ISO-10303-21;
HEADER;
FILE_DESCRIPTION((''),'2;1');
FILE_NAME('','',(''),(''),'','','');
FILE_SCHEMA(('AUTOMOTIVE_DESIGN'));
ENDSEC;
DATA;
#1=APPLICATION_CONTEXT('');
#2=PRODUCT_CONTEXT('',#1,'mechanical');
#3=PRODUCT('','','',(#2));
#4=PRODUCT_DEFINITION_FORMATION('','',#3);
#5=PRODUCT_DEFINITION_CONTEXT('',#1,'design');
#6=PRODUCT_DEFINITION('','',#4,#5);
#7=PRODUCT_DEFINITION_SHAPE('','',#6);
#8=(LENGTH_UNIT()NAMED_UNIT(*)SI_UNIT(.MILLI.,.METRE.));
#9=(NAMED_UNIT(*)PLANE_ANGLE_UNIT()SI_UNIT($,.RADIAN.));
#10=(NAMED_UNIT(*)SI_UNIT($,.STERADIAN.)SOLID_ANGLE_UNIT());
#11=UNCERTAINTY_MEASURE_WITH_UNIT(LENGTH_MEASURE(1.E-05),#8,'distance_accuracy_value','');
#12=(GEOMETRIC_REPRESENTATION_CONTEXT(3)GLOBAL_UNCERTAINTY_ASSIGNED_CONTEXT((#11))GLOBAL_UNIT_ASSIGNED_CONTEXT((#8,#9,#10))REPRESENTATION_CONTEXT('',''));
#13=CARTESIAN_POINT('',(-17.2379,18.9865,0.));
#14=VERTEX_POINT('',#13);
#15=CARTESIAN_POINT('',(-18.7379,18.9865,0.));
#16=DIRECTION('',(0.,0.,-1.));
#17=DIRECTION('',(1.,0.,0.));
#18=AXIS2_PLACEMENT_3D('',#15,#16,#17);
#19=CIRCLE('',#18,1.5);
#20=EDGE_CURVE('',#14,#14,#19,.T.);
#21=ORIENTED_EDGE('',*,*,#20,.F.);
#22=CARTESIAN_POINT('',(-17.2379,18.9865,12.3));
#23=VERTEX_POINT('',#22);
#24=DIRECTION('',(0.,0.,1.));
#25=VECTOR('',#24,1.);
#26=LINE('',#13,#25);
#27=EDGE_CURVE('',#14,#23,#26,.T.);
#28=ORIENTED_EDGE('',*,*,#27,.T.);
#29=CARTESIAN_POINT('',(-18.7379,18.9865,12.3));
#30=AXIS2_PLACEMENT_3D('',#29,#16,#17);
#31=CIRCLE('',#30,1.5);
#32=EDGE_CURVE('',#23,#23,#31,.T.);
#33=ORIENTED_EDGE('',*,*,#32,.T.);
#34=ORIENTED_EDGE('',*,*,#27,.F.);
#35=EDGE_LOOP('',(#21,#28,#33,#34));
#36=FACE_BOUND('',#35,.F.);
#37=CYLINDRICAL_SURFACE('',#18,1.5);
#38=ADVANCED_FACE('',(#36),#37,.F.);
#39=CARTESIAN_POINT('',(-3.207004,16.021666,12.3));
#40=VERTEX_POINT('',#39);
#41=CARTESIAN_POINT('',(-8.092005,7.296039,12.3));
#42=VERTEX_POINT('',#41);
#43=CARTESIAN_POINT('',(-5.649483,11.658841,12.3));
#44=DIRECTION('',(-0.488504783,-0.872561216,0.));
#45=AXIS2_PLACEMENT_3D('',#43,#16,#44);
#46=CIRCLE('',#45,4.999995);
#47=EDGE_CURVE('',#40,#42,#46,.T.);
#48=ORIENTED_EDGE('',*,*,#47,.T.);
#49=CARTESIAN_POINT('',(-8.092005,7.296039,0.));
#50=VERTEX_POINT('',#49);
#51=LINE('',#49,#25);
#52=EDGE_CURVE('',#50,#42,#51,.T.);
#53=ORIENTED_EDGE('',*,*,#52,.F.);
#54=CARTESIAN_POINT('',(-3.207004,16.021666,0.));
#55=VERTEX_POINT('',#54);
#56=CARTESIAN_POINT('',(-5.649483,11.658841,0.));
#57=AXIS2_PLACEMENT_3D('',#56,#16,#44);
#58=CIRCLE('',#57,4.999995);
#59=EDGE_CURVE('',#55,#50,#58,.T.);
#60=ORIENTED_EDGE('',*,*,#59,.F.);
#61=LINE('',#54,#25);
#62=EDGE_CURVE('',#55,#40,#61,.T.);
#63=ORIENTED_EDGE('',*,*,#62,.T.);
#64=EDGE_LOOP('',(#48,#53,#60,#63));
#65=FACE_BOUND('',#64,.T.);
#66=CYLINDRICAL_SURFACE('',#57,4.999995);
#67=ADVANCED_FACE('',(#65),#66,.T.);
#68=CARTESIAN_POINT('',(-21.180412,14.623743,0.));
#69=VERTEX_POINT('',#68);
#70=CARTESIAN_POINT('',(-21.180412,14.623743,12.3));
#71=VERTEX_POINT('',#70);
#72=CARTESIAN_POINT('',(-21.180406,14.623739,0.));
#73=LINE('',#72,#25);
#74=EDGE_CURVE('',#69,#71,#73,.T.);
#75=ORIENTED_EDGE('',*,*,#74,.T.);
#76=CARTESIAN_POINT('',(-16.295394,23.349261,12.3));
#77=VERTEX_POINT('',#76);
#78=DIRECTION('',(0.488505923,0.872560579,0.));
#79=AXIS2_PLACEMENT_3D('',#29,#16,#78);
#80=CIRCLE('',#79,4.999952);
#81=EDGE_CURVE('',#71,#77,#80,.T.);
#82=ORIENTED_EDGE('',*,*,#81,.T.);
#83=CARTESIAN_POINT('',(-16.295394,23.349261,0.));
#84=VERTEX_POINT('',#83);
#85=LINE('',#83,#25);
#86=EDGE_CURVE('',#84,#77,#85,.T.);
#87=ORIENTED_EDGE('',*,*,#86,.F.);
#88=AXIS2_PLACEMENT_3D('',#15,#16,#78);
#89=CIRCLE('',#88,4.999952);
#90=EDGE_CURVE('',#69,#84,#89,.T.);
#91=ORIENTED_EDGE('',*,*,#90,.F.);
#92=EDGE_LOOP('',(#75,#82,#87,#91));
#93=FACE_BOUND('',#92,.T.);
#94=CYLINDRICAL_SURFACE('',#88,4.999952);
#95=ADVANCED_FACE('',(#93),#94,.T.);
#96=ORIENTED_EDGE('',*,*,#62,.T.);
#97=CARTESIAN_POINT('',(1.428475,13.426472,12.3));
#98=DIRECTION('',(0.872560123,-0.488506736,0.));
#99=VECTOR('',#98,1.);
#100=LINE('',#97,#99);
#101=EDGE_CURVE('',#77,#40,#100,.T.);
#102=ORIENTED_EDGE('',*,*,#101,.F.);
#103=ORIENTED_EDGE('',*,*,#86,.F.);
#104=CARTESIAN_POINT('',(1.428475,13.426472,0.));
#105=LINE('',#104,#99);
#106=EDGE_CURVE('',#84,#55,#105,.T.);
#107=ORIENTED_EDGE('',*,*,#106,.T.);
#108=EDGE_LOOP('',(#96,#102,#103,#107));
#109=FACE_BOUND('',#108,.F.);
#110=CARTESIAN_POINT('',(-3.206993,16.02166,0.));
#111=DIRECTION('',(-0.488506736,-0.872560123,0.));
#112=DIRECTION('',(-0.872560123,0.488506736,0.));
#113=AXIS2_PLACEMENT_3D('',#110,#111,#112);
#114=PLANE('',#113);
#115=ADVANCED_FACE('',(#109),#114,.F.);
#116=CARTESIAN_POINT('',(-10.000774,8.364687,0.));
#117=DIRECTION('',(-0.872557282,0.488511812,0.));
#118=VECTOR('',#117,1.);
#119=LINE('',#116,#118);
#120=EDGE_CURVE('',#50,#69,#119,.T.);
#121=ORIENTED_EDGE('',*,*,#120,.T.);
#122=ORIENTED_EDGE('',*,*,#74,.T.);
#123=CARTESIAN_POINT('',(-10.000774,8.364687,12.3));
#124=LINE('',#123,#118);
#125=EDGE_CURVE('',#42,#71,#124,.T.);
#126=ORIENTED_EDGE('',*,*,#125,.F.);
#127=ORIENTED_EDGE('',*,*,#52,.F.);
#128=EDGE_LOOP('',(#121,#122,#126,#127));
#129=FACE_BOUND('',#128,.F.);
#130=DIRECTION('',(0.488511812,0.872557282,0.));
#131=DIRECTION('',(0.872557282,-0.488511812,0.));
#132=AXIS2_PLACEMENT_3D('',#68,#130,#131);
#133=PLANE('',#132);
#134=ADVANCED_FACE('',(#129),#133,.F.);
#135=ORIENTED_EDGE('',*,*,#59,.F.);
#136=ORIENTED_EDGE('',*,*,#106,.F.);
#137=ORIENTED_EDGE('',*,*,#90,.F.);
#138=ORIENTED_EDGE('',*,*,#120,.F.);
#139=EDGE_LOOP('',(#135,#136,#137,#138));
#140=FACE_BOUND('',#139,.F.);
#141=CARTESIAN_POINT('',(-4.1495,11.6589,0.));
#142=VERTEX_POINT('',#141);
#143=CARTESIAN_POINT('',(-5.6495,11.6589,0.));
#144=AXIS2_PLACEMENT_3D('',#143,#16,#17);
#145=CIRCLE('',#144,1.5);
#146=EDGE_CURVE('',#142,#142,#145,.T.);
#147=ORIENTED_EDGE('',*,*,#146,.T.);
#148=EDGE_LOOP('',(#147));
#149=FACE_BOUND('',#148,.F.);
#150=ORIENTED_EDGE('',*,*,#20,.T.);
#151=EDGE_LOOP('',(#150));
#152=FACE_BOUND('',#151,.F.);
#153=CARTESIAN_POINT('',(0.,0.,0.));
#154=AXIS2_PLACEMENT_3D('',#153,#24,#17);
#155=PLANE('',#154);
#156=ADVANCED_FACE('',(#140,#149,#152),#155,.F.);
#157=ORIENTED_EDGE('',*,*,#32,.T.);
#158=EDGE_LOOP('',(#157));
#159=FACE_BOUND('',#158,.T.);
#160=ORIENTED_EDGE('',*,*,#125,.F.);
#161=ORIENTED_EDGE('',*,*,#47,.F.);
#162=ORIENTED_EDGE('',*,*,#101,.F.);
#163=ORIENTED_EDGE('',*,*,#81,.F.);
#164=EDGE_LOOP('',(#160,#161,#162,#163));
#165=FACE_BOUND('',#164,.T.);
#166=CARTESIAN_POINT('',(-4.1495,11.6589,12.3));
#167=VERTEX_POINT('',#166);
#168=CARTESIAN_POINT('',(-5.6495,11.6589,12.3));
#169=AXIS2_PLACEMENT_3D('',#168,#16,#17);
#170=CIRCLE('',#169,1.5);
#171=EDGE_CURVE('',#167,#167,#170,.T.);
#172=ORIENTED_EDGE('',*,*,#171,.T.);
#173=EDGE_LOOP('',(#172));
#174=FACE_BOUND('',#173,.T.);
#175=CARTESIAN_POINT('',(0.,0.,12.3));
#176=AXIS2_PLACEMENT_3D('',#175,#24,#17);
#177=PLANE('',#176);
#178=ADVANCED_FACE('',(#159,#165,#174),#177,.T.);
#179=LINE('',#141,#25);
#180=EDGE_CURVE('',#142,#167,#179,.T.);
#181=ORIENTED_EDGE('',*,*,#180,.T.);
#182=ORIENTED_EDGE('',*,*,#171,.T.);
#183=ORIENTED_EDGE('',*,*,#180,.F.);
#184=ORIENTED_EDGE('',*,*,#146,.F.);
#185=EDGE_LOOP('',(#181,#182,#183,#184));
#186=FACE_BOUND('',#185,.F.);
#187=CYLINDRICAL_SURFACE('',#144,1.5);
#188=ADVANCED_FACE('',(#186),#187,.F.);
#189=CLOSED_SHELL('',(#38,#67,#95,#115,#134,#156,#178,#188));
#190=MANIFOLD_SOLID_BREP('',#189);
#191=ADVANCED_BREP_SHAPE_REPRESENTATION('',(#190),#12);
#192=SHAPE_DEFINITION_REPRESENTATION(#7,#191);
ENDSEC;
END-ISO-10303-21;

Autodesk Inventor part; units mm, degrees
ref_plane "YZ Plane" through (0, 0, 0) normal (1, 0, 0) x (0, 1, 0)
ref_plane "XZ Plane" through (0, 0, 0) normal (0, 1, 0) x (-1, 0, 0)
sketch "Sketch1" plane through (0, 0, 0) normal (0, 0, 1) x (1, 0, 0)
  line L0 (86.516, -0.3214) -> (114.7595, -23.8164) projected
  arc A0 (113.4805, -27.354) -> (114.7595, -23.8164) centre (113.4805, -25.354) ccw projected
  line L1 (113.4805, -27.354) -> (84.3159, -27.354) projected
  arc A1 (80.4978, -22.1613) -> (84.3159, -27.354) centre (84.3159, -23.354) ccw projected
  arc A2 (80.4978, -22.1613) -> (83.238, -1.9261) centre (22.2724, -3.9734) ccw projected
  arc A3 (86.516, -0.3214) -> (83.238, -1.9261) centre (85.2369, -1.8589) ccw projected
  arc A4 (123.464, -37.945) -> (119.4703, -38.0751) centre (121.4642, -37.9192) ccw projected
  arc A5 (144.0129, -57.1973) -> (123.464, -37.945) centre (122.1805, -59.9075) ccw projected
  arc A6 (144.143, -61.191) -> (144.0129, -57.1973) centre (144.1688, -59.1912) ccw projected
  arc A7 (124.8907, -81.7399) -> (144.143, -61.191) centre (122.1805, -59.9075) ccw projected
  arc A8 (120.8969, -81.87) -> (124.8907, -81.7399) centre (122.8968, -81.8958) ccw projected
  arc A9 (100.3481, -62.6177) -> (120.8969, -81.87) centre (122.1805, -59.9075) ccw projected
  arc A10 (100.218, -58.6239) -> (100.3481, -62.6177) centre (100.1921, -60.6238) ccw projected
  arc A11 (119.4703, -38.0751) -> (100.218, -58.6239) centre (122.1805, -59.9075) ccw projected
  arc A12 (87.2274, -61.7195) -> (88.373, -68.9659) centre (122.1805, -59.9075) ccw projected
  arc A13 (85.8324, -71.3887) -> (88.373, -68.9659) centre (86.4412, -69.4836) ccw projected
  line L2 (85.8324, -71.3887) -> (52.5887, -60.766) projected
  arc A14 (52.2157, -57.1184) -> (52.5887, -60.766) centre (53.1975, -58.8609) ccw projected
  arc A15 (52.2157, -57.1184) -> (67.1926, -45.2429) centre (22.2724, -3.9734) ccw projected
  arc A16 (72.896, -45.0519) -> (67.1926, -45.2429) centre (70.1382, -47.9491) ccw projected
  line L3 (72.896, -45.0519) -> (84.7539, -56.3391) projected
  arc A17 (87.2274, -61.7195) -> (84.7539, -56.3391) centre (79.2381, -62.1337) ccw projected
  circle A18 centre (-5.6495, 11.6589) radius 2.05 projected
  circle A19 centre (-18.7379, 18.9865) radius 2.05 projected
  line L4 (2.166, 24.8708) -> (-5.7638, 34.6785) projected
  arc A20 (-5.0374, 39.0984) -> (-5.7638, 34.6785) centre (-3.431, 36.5647) ccw projected
  arc A21 (4.796, 43.9388) -> (-5.0374, 39.0984) centre (22.2724, -3.9734) ccw projected
  arc A22 (8.7012, 41.9703) -> (4.796, 43.9388) centre (5.8241, 41.1205) ccw projected
  line L5 (8.7012, 41.9703) -> (12.2517, 29.9506) projected
  arc A23 (10.4645, 26.3057) -> (12.2517, 29.9506) centre (9.3746, 29.1007) ccw projected
  arc A24 (10.4645, 26.3057) -> (6.0009, 24.16) centre (22.2724, -3.9734) ccw projected
  arc A25 (2.166, 24.8708) -> (6.0009, 24.16) centre (4.4989, 26.757) ccw projected
  line L6 (21.3733, 31.3882) -> (21.0547, 43.9173) projected
  arc A26 (24.1651, 46.9915) -> (21.0547, 43.9173) centre (24.0537, 43.9936) ccw projected
  arc A27 (35.0106, 45.4102) -> (24.1651, 46.9915) centre (22.2724, -3.9734) ccw projected
  arc A28 (37.0613, 41.4281) -> (35.0106, 45.4102) centre (34.2613, 42.5053) ccw projected
  line L7 (37.0613, 41.4281) -> (32.5324, 29.6567) projected
  arc A29 (29.1021, 27.8009) -> (32.5324, 29.6567) centre (29.7325, 30.7339) ccw projected
  arc A30 (29.1021, 27.8009) -> (24.1948, 28.4697) centre (22.2724, -3.9734) ccw projected
  arc A31 (21.3733, 31.3882) -> (24.1948, 28.4697) centre (24.3723, 31.4645) ccw projected
  line L8 (37.199, 27.8613) -> (41.7278, 39.6327) projected
  arc A32 (45.9187, 41.2135) -> (41.7278, 39.6327) centre (44.5277, 38.5555) ccw projected
  arc A33 (55.0274, 35.1177) -> (45.9187, 41.2135) centre (22.2724, -3.9734) ccw projected
  arc A34 (55.2752, 30.7515) -> (55.0274, 35.1177) centre (53.1006, 32.8182) ccw projected
  line L9 (55.2752, 30.7515) -> (46.641, 21.6668) projected
  arc A35 (42.5909, 21.3921) -> (46.641, 21.6668) centre (44.4665, 23.7336) ccw projected
  arc A36 (42.5909, 21.3921) -> (38.5009, 24.1849) centre (22.2724, -3.9734) ccw projected
  arc A37 (37.199, 27.8613) -> (38.5009, 24.1849) centre (39.9989, 26.7841) ccw projected
  line L10 (52.4469, 14.4861) -> (59.2911, 18.6731) projected
  arc A38 (63.5177, 17.4994) -> (59.2911, 18.6731) centre (60.8567, 16.114) ccw projected
  arc A39 (66.9215, 9.0155) -> (63.5177, 17.4994) centre (22.2724, -3.9734) ccw projected
  arc A40 (64.5079, 5.2141) -> (66.9215, 9.0155) centre (64.0409, 8.1775) ccw projected
  line L11 (64.5079, 5.2141) -> (56.5269, 3.9563) projected
  arc A41 (53.2046, 5.9991) -> (56.5269, 3.9563) centre (56.0599, 6.9197) ccw projected
  arc A42 (53.2046, 5.9991) -> (51.3302, 10.5833) centre (22.2724, -3.9734) ccw projected
  arc A43 (52.4469, 14.4861) -> (51.3302, 10.5833) centre (54.0124, 11.927) ccw projected
  line L12 (57.3053, -0.9828) -> (65.2864, 0.2751) projected
  arc A44 (68.7521, -2.5997) -> (65.2864, 0.2751) centre (65.7534, -2.6883) ccw projected
  arc A45 (68.1227, -11.7192) -> (68.7521, -2.5997) centre (22.2724, -3.9734) ccw projected
  arc A46 (64.4621, -14.1361) -> (68.1227, -11.7192) centre (65.1646, -11.2195) ccw projected
  line L13 (64.4621, -14.1361) -> (56.6618, -12.2571) projected
  arc A47 (54.3988, -8.887) -> (56.6618, -12.2571) centre (57.3643, -9.3405) ccw projected
  arc A48 (54.3988, -8.887) -> (54.7724, -3.9485) centre (22.2724, -3.9734) ccw projected
  arc A49 (57.3053, -0.9828) -> (54.7724, -3.9485) centre (57.7724, -3.9462) ccw projected
  line L14 (53.346, -20.8755) -> (64.3558, -26.8641) projected
  arc A50 (65.463, -31.0949) -> (64.3558, -26.8641) centre (62.9223, -29.4995) ccw projected
  arc A51 (58.6707, -39.6968) -> (65.463, -31.0949) centre (22.2724, -3.9734) ccw projected
  arc A52 (54.1968, -39.4816) -> (58.6707, -39.6968) centre (56.5296, -37.5954) ccw projected
  line L15 (54.1968, -39.4816) -> (46.2669, -29.6738) projected
  arc A53 (46.3749, -25.7752) -> (46.2669, -29.6738) centre (48.5998, -27.7876) ccw projected
  arc A54 (46.3749, -25.7752) -> (49.4077, -21.8598) centre (22.2724, -3.9734) ccw projected
  arc A55 (53.346, -20.8755) -> (49.4077, -21.8598) centre (51.9125, -23.5108) ccw projected
  line L16 (42.3788, -32.8175) -> (50.3087, -42.6252) projected
  arc A56 (49.5823, -47.0451) -> (50.3087, -42.6252) centre (47.9758, -44.5114) ccw projected
  arc A57 (39.7488, -51.8855) -> (49.5823, -47.0451) centre (22.2724, -3.9734) ccw projected
  arc A58 (35.8437, -49.917) -> (39.7488, -51.8855) centre (38.7208, -49.0672) ccw projected
  line L17 (35.8437, -49.917) -> (32.2932, -37.8973) projected
  arc A59 (34.0803, -34.2525) -> (32.2932, -37.8973) centre (35.1703, -37.0474) ccw projected
  arc A60 (34.0803, -34.2525) -> (38.5439, -32.1067) centre (22.2724, -3.9734) ccw projected
  arc A61 (42.3788, -32.8175) -> (38.5439, -32.1067) centre (40.0459, -34.7037) ccw projected
  line L18 (23.1715, -39.3349) -> (23.3755, -47.3558) projected
  arc A62 (20.2457, -50.4292) -> (23.3755, -47.3558) centre (20.3765, -47.432) ccw projected
  arc A63 (11.1966, -49.135) -> (20.2457, -50.4292) centre (22.2724, -3.9734) ccw projected
  arc A64 (9.1112, -45.1441) -> (11.1966, -49.135) centre (11.9112, -46.2214) ccw projected
  line L19 (9.1112, -45.1441) -> (12.0124, -37.6034) projected
  arc A65 (15.4428, -35.7477) -> (12.0124, -37.6034) centre (14.8123, -38.6807) ccw projected
  arc A66 (15.4428, -35.7477) -> (20.35, -36.4165) centre (22.2724, -3.9734) ccw projected
  arc A67 (23.1715, -39.3349) -> (20.35, -36.4165) centre (20.1725, -39.4112) ccw projected
  line L20 (7.3459, -35.8081) -> (4.4447, -43.3488) projected
  arc A68 (0.2222, -44.9128) -> (4.4447, -43.3488) centre (1.6448, -42.2715) ccw projected
  arc A69 (-7.3609, -39.808) -> (0.2222, -44.9128) centre (22.2724, -3.9734) ccw projected
  arc A70 (-7.6236, -35.4294) -> (-7.3609, -39.808) centre (-5.449, -37.4961) ccw projected
  line L21 (-7.6236, -35.4294) -> (-2.0962, -29.6136) projected
  arc A71 (1.9539, -29.3388) -> (-2.0962, -29.6136) centre (0.0783, -31.6803) ccw projected
  arc A72 (1.9539, -29.3388) -> (6.0439, -32.1316) centre (22.2724, -3.9734) ccw projected
  arc A73 (7.3459, -35.8081) -> (6.0439, -32.1316) centre (4.5459, -34.7308) ccw projected
  line L22 (-7.9021, -22.4328) -> (-18.5933, -28.9733) projected
  arc A74 (-22.8108, -27.8167) -> (-18.5933, -28.9733) centre (-20.1588, -26.4142) ccw projected
  arc A75 (-26.8641, -17.6335) -> (-22.8108, -27.8167) centre (22.2724, -3.9734) ccw projected
  arc A76 (-24.4408, -13.8666) -> (-26.8641, -17.6335) centre (-23.9738, -16.83) ccw projected
  line L23 (-24.4408, -13.8666) -> (-11.9821, -11.903) projected
  arc A77 (-8.6598, -13.9459) -> (-11.9821, -11.903) centre (-11.515, -14.8664) ccw projected
  arc A78 (-8.6598, -13.9459) -> (-6.7854, -18.53) centre (22.2724, -3.9734) ccw projected
  arc A79 (-7.9021, -22.4328) -> (-6.7854, -18.53) centre (-9.4676, -19.8737) ccw projected
  line L24 (-12.7605, -6.9639) -> (-25.2192, -8.9275) projected
  arc A80 (-28.6837, -6.0885) -> (-25.2192, -8.9275) centre (-25.6863, -5.9641) ccw projected
  arc A81 (-27.9589, 4.8477) -> (-28.6837, -6.0885) centre (22.2724, -3.9734) ccw projected
  arc A82 (-24.3016, 7.2454) -> (-27.9589, 4.8477) centre (-25.0042, 4.3289) ccw projected
  line L25 (-24.3016, 7.2454) -> (-12.117, 4.3104) projected
  arc A83 (-9.854, 0.9403) -> (-12.117, 4.3104) centre (-12.8195, 1.3938) ccw projected
  arc A84 (-9.854, 0.9403) -> (-10.2276, -3.9982) centre (22.2724, -3.9734) ccw projected
  arc A85 (-12.7605, -6.9639) -> (-10.2276, -3.9982) centre (-13.2276, -4.0005) ccw projected
  circle A86 centre (85.7696, -48.6911) radius 2.05 projected
  circle A87 centre (93.5857, -34.7301) radius 2.05 projected
  circle A88 centre (76.5892, -34.383) radius 2.05 projected
  circle A89 centre (151.7223, -75.704) radius 1.5 projected
  circle A90 centre (150.6316, -42.2218) radius 1.5 projected
  circle A91 centre (123.2712, -93.3897) radius 1.5 projected
  circle A92 centre (123.1684, -22.4726) radius 2 projected
  circle A93 centre (91.7471, -81.3441) radius 2 projected
  circle A94 centre (110.6431, -14.2192) radius 2 projected
  circle A95 centre (78.0027, -75.3364) radius 2 projected
  arc A96 (-41.3146, 7.2953) -> (-36.3695, 11.8712) centre (-78.5082, 52.4493) ccw projected
  arc A97 (-32.9898, 9.9939) -> (-36.3695, 11.8712) centre (-34.9289, 10.4839) ccw projected
  arc A98 (-32.9898, 9.9939) -> (-34.2864, 3.1052) centre (22.2724, -3.9734) ccw projected
  arc A99 (-37.576, 1.8381) -> (-34.2864, 3.1052) centre (-36.2709, 3.3536) ccw projected
  arc A100 (-37.576, 1.8381) -> (-40.8614, 3.9267) centre (-46.3856, -8.3913) ccw projected
  arc A101 (-41.3146, 7.2953) -> (-40.8614, 3.9267) centre (-40.043, 5.7516) ccw projected
  arc A102 (-33.319, -18.6649) -> (-28.8077, -30.3754) centre (22.2724, -3.9734) ccw projected
  arc A103 (-31.7455, -32.9222) -> (-28.8077, -30.3754) centre (-30.5844, -31.2938) ccw projected
  line L26 (-31.7455, -32.9222) -> (-43.0588, -24.8558) projected
  arc A104 (-42.4768, -21.313) -> (-43.0588, -24.8558) centre (-41.8977, -23.2274) ccw projected
  arc A105 (-42.4768, -21.313) -> (-36.6892, -17.7843) centre (-46.3856, -8.3913) ccw projected
  arc A106 (-33.319, -18.6649) -> (-36.6892, -17.7843) centre (-35.2527, -19.1759) ccw projected
  line L27 (-64.993, -11.6723) -> (-61.5225, -11.0604) projected
  arc A107 (-59.2669, -12.4314) -> (-61.5225, -11.0604) centre (-61.1752, -13.03) ccw projected
  arc A108 (-59.2669, -12.4314) -> (-52.6012, -20.3753) centre (-46.3856, -8.3913) ccw projected
  arc A109 (-51.6426, -22.8348) -> (-52.6012, -20.3753) centre (-53.522, -22.1507) ccw projected
  line L28 (-51.6426, -22.8348) -> (-52.8479, -26.1463) projected
  arc A110 (-55.6053, -27.2592) -> (-52.8479, -26.1463) centre (-54.7273, -25.4622) ccw projected
  arc A111 (-66.5678, -14.1946) -> (-55.6053, -27.2592) centre (-46.3856, -8.3913) ccw projected
  arc A112 (-64.993, -11.6723) -> (-66.5678, -14.1946) centre (-64.6457, -13.6419) ccw projected
  circle A113 centre (-48.56, 6.9152) radius 2.1 projected
  circle A114 centre (-32.9741, 22.501) radius 2.1 projected
  circle A115 centre (-69.0444, -1.2227) radius 2.1 projected
  circle A116 centre (-24.8362, 42.9855) radius 2.1 projected
  circle A117 centre (-46.3856, -8.3913) radius 8 projected
  line L29 (-28.6687, 48.4472) -> (-17.4995, 54.7179) projected
  arc A118 (-69.8258, 3.2089) -> (-28.6687, 48.4472) centre (-78.5082, 52.4493) ccw projected
  line L30 (-69.8258, 3.2089) -> (-78.128, 1.745) projected
  line L31 (-78.128, 1.745) -> (-74.0482, -21.3924) projected
  line L32 (-74.0482, -21.3924) -> (-71.8042, -20.9967) projected
  arc A119 (-69.7278, -21.9611) -> (-71.8042, -20.9967) centre (-71.4569, -22.9663) ccw projected
  arc A120 (-69.7278, -21.9611) -> (-51.1536, -34.967) centre (-46.3856, -8.3913) ccw projected
  arc A121 (-49.5371, -36.5883) -> (-51.1536, -34.967) centre (-51.5067, -36.9355) ccw projected
  line L33 (-49.5371, -36.5883) -> (-49.1414, -38.8323) projected
  line L34 (-49.1414, -38.8323) -> (-41.7759, -37.5336) projected
  arc A122 (-40.7711, -37.6143) -> (-41.7759, -37.5336) centre (-41.4286, -39.5032) ccw projected
  line L35 (-40.7711, -37.6143) -> (2.4006, -52.6404) projected
  arc A123 (3.6226, -55.2133) -> (2.4006, -52.6404) centre (1.7432, -54.5293) ccw projected
  line L36 (3.6226, -55.2133) -> (1.8974, -59.9532) projected
  line L37 (1.8974, -59.9532) -> (17.5702, -63.2237) projected
  line L38 (17.5702, -63.2237) -> (111.5272, -93.2468) projected
  arc A124 (111.5272, -93.2468) -> (114.3001, -94.0088) centre (122.1805, -59.9075) ccw projected
  arc A125 (115.8487, -95.8923) -> (114.3001, -94.0088) centre (113.8498, -95.9574) ccw projected
  line L39 (115.8487, -95.8923) -> (115.9054, -97.6318) projected
  line L40 (115.9054, -97.6318) -> (130.8974, -97.1434) projected
  line L41 (130.8974, -97.1434) -> (130.8408, -95.404) projected
  arc A126 (132.2635, -93.4236) -> (130.8408, -95.404) centre (132.8397, -95.3388) ccw projected
  arc A127 (132.2635, -93.4236) -> (147.7729, -83.7828) centre (122.1805, -59.9075) ccw projected
  arc A128 (150.1784, -83.3834) -> (147.7729, -83.7828) centre (149.2353, -85.1471) ccw projected
  line L42 (150.1784, -83.3834) -> (151.7131, -84.204) projected
  line L43 (151.7131, -84.204) -> (158.7862, -70.9764) projected
  line L44 (158.7862, -70.9764) -> (157.2515, -70.1557) projected
  arc A129 (156.2478, -67.9334) -> (157.2515, -70.1557) centre (158.1945, -68.392) ccw projected
  arc A130 (156.2478, -67.9334) -> (155.6533, -49.6815) centre (122.1805, -59.9075) ccw projected
  arc A131 (156.5102, -47.3985) -> (155.6533, -49.6815) centre (157.566, -49.0971) ccw projected
  line L45 (156.5102, -47.3985) -> (157.9882, -46.4797) projected
  line L46 (157.9882, -46.4797) -> (150.0693, -33.7404) projected
  line L47 (150.0693, -33.7404) -> (148.5912, -34.6592) projected
  arc A132 (146.1648, -34.4172) -> (148.5912, -34.6592) centre (147.5353, -32.9607) ccw projected
  arc A133 (146.1648, -34.4172) -> (144.5637, -33.0004) centre (122.1805, -59.9075) ccw projected
  line L48 (144.5637, -33.0004) -> (73.8637, 25.8129) projected
  line L49 (73.8637, 25.8129) -> (63.9599, 38.3925) projected
  arc A134 (63.9599, 38.3925) -> (60.1088, 41.8646) centre (22.2724, -3.9734) ccw projected
  line L50 (60.1088, 41.8646) -> (59.4908, 41.1159) projected
  arc A135 (56.7287, 40.804) -> (59.4908, 41.1159) centre (57.9484, 42.389) ccw projected
  arc A136 (56.7287, 40.804) -> (49.4201, 45.5771) centre (22.2724, -3.9734) ccw projected
  arc A137 (48.5953, 48.2316) -> (49.4201, 45.5771) centre (50.3811, 47.3311) ccw projected
  line L51 (48.5953, 48.2316) -> (49.1968, 49.4245) projected
  arc A138 (49.1968, 49.4245) -> (43.4677, 51.9463) centre (22.2724, -3.9734) ccw projected
  line L52 (43.4677, 51.9463) -> (31.8766, 55.0521) projected
  arc A139 (31.8766, 55.0521) -> (25.6541, 55.7327) centre (22.2724, -3.9734) ccw projected
  line L53 (25.6541, 55.7327) -> (25.5786, 54.3989) projected
  arc A140 (23.537, 52.5125) -> (25.5786, 54.3989) centre (23.5818, 54.512) ccw projected
  arc A141 (23.537, 52.5125) -> (14.821, 52.0331) centre (22.2724, -3.9734) ccw projected
  arc A142 (12.5849, 53.6843) -> (14.821, 52.0331) centre (14.5573, 54.0157) ccw projected
  line L54 (12.5849, 53.6843) -> (12.4241, 54.6417) projected
  arc A143 (12.4241, 54.6417) -> (7.3529, 53.5603) centre (22.2724, -3.9734) ccw projected
  line L55 (7.3529, 53.5603) -> (-6.5013, 48.0227) projected
  arc A144 (-8.4026, 48.2499) -> (-6.5013, 48.0227) centre (-7.2436, 49.8798) ccw projected
  line L56 (-8.4026, 48.2499) -> (-17.4995, 54.7179) projected
  circle A145 centre (-71.296, -16.8454) radius 1.5 projected
  circle A146 centre (18.8152, -59.8032) radius 1.5 projected
  circle A147 centre (53.4562, -50.8504) radius 1.5 projected
  circle A148 centre (60.8075, 36.5725) radius 1.5 projected
  circle A149 centre (28.5162, 51.9811) radius 1.5 projected
  circle A150 centre (9.173, 50.4079) radius 1.5 projected
  circle A151 centre (44.8423, 47.6065) radius 1.5 projected
  circle A152 centre (67.2628, -37.2117) radius 1.5 projected
  circle A153 centre (38.1378, -57.9935) radius 1.5 projected
  circle A154 centre (-45.81, -34.6909) radius 1.5 projected
  circle A155 centre (22.2724, -3.9734) radius 24.5 projected
  line L57 (-5.6495, 11.6589) -> (-18.7379, 18.9865) construction
  line L58 (-3.6955, 15.1491) -> (-16.7839, 22.4767)
  line L59 (-20.6919, 15.4963) -> (-7.6035, 8.1686)
  arc A156 (-7.6035, 8.1686) -> (-3.6955, 15.1491) centre (-5.6495, 11.6589) ccw
  arc A157 (-16.7839, 22.4767) -> (-20.6919, 15.4963) centre (-18.7379, 18.9865) ccw
  circle A158 centre (-5.6495, 11.6589) radius 1.5
  circle A159 centre (-18.7379, 18.9865) radius 1.5
  point P0 (0, 0)
  point P1 (-12.1937, 15.3227)
  dimension "d0" = 8
  dimension "d1" = 3
  dimension "d2" = 3
ref_plane "Work Plane1" through (82.5607, -52.1105, 12.3) normal (0, 0, 1) x (0.9725249, 0.2327991, 0)
extrude "Extrusion1" add sketch "Sketch1" along normal up to surface (12.3 mm away) contours A18 | A19 | A156 L59 A157 L58
thicken "Thicken1" operation add thickness 1 both sides no extend neighbours yes toward (-0.4885077, -0.8725596, 0) faces at (-16.3291, 13.0537, 8.2)
properties part number "leg_fixer_2"
